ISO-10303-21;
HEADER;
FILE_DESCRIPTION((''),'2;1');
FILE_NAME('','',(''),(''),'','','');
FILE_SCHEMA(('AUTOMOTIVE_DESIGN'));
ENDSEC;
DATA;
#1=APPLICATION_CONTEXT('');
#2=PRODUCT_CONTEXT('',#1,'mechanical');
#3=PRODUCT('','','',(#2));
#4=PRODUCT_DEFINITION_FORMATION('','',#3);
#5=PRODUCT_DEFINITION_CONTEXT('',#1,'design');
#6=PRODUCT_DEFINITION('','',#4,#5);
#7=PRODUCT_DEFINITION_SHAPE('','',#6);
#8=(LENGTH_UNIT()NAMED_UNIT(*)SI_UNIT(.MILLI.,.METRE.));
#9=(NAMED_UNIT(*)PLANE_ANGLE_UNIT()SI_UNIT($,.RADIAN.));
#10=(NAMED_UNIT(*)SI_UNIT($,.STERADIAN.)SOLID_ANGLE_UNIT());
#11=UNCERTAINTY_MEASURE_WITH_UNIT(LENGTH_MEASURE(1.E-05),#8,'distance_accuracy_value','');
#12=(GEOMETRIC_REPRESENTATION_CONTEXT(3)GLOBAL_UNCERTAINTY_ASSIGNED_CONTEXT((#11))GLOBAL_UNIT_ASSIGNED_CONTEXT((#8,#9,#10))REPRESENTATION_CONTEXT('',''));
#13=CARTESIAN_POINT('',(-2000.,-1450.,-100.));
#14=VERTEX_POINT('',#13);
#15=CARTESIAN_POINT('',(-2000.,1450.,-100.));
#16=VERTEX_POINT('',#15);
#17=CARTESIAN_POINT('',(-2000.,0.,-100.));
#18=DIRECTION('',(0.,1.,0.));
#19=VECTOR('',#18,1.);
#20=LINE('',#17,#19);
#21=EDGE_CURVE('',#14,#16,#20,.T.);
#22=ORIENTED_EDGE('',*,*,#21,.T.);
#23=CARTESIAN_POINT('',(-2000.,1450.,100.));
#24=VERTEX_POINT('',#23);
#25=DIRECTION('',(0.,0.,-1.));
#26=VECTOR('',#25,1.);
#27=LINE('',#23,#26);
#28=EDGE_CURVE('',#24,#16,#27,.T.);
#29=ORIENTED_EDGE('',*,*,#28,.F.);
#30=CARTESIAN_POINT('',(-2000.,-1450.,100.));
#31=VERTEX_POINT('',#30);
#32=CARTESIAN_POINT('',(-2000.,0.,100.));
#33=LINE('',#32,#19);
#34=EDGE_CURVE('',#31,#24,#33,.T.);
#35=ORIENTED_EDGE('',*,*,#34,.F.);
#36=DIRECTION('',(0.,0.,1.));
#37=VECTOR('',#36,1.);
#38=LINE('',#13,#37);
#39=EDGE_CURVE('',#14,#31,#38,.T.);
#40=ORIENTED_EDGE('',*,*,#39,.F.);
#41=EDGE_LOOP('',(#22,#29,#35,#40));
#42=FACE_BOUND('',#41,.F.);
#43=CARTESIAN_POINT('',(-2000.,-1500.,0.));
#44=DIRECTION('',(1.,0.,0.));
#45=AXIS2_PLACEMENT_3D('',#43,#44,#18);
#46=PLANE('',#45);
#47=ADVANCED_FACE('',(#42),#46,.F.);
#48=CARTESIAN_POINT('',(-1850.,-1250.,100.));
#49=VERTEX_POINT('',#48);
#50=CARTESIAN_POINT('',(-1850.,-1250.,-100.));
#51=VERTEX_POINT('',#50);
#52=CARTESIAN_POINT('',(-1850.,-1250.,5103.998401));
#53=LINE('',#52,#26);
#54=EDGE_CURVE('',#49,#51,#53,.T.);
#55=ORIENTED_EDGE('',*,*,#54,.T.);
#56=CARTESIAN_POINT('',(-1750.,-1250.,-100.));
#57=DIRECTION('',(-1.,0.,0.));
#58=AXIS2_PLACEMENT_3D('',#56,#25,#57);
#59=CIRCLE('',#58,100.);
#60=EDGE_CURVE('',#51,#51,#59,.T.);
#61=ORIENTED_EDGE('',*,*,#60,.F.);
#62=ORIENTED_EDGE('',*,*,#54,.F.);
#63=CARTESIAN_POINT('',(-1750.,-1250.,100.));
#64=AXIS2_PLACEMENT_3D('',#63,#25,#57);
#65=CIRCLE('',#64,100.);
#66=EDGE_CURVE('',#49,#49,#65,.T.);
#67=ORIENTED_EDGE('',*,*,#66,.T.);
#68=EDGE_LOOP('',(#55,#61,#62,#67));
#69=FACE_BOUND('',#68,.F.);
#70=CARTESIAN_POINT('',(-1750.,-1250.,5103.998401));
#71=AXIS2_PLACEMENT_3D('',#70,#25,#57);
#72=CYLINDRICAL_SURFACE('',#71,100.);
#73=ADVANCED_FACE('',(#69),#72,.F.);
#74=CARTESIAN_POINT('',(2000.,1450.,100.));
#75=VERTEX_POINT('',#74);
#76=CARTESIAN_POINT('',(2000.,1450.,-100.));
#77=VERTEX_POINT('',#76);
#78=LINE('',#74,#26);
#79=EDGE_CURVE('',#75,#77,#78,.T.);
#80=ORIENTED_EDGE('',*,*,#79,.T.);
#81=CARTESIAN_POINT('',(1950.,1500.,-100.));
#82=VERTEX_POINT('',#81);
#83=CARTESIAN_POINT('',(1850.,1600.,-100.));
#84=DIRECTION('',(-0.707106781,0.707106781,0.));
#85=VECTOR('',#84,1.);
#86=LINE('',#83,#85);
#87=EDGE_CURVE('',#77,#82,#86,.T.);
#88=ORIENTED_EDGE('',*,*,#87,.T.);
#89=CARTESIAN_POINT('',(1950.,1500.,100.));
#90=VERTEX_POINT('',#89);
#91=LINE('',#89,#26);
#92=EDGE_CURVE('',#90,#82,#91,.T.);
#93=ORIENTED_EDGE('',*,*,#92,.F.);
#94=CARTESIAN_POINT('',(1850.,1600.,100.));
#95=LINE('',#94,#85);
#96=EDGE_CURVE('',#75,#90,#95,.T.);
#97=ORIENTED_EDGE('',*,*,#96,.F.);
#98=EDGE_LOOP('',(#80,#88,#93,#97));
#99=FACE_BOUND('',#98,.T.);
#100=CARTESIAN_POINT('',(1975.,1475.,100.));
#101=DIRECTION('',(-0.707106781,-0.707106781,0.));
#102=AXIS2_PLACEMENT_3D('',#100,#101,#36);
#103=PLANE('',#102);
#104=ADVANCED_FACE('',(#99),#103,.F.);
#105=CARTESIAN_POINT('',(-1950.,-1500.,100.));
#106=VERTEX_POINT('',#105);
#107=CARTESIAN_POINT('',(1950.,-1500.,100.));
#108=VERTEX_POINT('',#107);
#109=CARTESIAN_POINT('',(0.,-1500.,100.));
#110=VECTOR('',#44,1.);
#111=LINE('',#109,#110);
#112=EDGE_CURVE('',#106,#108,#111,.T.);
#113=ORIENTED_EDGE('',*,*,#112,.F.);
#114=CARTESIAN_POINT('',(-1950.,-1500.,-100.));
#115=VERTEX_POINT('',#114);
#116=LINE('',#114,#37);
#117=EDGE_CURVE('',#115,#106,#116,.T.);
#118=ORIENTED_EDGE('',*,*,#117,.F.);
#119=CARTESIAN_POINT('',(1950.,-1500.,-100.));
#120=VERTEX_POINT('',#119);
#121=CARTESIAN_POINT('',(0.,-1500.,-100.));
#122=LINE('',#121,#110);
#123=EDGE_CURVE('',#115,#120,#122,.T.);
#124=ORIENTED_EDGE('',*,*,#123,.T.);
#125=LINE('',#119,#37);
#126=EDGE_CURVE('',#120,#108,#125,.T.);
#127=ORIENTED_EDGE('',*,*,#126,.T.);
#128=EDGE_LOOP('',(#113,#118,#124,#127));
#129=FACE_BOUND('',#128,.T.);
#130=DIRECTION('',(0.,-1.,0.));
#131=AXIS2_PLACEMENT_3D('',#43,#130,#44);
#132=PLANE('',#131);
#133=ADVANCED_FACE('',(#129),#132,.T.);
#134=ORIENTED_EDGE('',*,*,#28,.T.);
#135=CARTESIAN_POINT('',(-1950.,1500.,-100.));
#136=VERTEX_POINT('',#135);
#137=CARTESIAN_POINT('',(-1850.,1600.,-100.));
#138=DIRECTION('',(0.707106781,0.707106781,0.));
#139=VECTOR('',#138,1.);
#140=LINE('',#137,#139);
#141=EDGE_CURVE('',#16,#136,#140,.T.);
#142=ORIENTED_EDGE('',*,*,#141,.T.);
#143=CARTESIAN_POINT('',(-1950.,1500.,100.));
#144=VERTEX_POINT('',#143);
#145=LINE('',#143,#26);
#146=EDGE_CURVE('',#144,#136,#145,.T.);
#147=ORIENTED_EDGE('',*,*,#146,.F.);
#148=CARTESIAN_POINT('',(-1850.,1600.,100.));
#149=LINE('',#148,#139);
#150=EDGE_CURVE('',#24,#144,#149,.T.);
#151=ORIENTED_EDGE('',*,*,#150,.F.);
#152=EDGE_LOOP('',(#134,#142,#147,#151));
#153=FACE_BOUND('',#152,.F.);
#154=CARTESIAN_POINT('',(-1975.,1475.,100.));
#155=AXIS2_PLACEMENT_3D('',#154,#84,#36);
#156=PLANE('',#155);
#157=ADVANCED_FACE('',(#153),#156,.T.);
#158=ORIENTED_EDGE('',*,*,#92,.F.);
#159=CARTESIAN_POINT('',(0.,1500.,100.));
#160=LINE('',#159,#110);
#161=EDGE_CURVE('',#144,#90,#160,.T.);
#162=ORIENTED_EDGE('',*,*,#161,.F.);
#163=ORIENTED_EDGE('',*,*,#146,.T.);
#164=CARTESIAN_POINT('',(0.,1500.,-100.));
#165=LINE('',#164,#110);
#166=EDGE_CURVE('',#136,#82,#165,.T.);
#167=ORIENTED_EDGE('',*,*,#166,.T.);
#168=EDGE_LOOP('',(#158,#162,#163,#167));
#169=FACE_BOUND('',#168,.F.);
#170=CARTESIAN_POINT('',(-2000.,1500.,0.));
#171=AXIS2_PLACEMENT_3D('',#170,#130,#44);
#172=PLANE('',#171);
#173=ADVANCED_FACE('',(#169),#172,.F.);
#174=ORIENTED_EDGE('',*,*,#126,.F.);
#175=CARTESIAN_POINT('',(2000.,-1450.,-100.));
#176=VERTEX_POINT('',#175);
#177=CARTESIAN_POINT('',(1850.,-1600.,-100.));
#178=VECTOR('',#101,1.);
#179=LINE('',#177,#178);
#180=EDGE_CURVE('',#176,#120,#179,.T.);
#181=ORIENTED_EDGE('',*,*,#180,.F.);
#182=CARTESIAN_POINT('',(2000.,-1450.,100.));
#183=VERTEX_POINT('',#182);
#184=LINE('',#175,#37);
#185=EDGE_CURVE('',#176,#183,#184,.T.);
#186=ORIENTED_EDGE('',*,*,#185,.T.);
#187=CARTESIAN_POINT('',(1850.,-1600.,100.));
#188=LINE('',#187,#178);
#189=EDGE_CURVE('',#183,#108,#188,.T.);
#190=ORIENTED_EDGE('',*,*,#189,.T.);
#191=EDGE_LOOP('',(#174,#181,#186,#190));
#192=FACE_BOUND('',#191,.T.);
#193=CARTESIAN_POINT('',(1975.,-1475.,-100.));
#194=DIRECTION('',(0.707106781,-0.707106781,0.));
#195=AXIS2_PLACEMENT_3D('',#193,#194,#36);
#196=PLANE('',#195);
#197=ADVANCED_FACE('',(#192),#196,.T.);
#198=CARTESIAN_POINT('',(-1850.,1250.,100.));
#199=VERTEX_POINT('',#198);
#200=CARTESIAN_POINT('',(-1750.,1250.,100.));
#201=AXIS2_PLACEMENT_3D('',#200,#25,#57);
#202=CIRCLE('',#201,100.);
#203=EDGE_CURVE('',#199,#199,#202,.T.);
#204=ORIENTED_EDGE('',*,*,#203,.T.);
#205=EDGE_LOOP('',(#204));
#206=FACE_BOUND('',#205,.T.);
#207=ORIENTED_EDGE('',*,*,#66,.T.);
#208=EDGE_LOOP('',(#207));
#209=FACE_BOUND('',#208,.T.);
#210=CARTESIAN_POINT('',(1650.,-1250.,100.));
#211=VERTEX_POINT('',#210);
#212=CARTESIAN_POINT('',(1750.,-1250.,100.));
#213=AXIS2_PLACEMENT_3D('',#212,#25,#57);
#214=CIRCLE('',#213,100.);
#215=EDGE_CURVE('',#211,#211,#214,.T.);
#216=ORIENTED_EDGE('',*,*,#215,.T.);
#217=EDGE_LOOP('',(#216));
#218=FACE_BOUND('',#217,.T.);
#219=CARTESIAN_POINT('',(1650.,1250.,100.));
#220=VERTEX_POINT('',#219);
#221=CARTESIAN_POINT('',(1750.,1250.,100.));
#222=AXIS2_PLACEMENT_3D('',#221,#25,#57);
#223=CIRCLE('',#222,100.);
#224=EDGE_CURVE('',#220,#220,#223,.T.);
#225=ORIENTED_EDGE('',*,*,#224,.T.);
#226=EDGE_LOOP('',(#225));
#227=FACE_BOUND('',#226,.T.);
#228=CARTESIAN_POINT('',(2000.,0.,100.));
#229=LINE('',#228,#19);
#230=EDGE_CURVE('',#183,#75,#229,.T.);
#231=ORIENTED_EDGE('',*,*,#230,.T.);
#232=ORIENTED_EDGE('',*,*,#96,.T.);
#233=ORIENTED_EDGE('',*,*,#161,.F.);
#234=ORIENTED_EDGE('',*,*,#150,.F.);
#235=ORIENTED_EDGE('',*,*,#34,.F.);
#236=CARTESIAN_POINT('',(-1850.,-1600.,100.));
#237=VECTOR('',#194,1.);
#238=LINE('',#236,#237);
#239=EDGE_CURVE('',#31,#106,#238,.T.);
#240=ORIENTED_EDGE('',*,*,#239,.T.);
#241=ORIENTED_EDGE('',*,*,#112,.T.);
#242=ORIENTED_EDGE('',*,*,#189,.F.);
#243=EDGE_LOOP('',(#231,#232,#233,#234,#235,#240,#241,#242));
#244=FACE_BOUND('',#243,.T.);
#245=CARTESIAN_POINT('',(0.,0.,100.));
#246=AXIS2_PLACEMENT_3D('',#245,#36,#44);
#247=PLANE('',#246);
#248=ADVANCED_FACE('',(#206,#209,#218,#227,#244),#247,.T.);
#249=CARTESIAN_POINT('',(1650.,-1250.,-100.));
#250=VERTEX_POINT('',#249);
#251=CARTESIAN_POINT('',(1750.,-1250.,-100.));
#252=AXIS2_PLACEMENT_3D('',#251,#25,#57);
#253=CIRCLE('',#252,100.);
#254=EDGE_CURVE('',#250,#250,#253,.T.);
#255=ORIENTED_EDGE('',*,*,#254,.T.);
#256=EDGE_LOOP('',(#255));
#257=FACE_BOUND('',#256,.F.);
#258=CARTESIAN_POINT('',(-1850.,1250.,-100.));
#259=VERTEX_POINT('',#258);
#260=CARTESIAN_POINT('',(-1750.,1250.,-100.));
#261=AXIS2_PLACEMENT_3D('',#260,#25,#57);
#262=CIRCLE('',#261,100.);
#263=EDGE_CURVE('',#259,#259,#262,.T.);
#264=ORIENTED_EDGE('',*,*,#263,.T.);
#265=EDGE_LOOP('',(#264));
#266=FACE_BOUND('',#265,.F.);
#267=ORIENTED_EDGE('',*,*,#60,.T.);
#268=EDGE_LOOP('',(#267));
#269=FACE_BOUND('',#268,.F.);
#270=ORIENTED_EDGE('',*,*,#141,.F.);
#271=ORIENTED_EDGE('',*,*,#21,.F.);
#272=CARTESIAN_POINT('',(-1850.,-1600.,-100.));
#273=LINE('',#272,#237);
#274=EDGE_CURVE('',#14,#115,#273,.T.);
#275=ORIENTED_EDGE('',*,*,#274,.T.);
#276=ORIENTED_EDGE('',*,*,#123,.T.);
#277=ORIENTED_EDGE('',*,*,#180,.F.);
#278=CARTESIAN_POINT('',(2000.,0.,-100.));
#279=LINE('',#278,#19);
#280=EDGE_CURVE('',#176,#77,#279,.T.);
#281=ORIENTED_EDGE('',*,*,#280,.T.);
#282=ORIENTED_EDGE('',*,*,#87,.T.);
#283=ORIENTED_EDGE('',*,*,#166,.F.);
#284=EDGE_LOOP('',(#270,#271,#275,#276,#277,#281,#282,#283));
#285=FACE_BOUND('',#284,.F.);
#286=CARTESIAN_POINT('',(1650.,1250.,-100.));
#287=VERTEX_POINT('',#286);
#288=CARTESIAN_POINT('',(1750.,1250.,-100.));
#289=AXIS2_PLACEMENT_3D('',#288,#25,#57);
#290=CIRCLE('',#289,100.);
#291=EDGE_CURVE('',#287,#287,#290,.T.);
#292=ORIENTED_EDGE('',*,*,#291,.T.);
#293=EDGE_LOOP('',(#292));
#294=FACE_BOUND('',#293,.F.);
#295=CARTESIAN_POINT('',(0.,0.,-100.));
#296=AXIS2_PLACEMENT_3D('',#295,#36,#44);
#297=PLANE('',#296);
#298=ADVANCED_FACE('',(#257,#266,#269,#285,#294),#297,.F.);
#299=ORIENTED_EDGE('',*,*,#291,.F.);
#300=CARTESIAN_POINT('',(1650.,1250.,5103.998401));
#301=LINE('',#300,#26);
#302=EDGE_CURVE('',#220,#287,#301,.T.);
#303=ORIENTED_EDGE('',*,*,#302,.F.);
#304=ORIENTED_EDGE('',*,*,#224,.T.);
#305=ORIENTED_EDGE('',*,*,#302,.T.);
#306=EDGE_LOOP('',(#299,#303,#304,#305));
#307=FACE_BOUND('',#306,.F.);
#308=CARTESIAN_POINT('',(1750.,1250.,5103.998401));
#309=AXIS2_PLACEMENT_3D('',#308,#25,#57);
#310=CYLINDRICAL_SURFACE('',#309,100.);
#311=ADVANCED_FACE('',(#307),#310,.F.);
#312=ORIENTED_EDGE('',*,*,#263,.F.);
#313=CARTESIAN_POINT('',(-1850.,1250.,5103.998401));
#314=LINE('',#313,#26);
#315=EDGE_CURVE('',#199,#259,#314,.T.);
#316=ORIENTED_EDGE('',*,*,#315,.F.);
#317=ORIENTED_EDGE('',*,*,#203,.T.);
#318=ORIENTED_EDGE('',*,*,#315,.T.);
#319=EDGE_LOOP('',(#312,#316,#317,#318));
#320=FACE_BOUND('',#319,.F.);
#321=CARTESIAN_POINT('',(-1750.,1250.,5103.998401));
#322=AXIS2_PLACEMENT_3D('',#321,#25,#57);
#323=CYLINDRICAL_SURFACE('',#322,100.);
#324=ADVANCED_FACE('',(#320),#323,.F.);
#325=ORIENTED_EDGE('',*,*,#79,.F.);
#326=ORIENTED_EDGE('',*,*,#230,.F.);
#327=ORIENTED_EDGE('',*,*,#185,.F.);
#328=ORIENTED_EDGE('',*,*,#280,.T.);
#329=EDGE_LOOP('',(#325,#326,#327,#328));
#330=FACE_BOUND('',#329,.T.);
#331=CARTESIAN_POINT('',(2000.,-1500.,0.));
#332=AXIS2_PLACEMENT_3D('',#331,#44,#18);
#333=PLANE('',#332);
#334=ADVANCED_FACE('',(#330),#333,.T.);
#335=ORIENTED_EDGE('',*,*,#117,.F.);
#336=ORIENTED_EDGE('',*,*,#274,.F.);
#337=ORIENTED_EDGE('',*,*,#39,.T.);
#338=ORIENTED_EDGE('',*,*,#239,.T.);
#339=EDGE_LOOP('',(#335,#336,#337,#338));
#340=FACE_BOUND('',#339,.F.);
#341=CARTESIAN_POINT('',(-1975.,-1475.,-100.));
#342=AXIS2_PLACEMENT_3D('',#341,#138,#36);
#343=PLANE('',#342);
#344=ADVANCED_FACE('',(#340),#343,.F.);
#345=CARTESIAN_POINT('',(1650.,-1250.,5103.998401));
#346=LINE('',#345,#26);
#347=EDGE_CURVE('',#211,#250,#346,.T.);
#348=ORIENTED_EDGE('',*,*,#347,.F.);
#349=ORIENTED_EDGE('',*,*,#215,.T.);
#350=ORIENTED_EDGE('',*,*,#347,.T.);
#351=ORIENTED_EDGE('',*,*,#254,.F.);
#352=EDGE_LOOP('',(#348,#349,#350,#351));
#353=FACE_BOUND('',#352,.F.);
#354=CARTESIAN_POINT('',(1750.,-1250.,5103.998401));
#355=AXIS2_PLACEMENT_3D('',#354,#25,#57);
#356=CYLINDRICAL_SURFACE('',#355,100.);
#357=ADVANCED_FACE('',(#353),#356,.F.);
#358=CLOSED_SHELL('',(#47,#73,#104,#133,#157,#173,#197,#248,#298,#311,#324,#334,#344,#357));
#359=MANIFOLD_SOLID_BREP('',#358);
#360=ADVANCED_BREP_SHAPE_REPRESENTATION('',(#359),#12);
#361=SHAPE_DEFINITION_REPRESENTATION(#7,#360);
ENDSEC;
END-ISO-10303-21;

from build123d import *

# Parameters (mm, degrees)
F0_W     = 4000
F0_H     = 3000
F1_DEPTH = 100
F2_SIZE  = 50
F4_D     = 200


with BuildPart() as f1:
    # F0 (on Top) → F1 (new body, symmetric)
    with BuildSketch(Plane.XY):
        Rectangle(F0_W, F0_H)
    extrude(amount=F1_DEPTH, both=True)

    # F2
    f2_edges = [f1.edges().sort_by_distance(p)[0] for p in [
        (-2000, -1500, 0),
        (2000, 1500, 0),
        (2000, -1500, 0),
        (-2000, 1500, 0),
    ]]
    chamfer(f2_edges, length=F2_SIZE)

    # F4 (through all)
    with Locations(Plane.XY.offset(100)):
        with Locations((-1750, 1250), (1750, 1250), (-1750, -1250), (1750, -1250)):
            Hole(F4_D / 2)


solid = f1.part
